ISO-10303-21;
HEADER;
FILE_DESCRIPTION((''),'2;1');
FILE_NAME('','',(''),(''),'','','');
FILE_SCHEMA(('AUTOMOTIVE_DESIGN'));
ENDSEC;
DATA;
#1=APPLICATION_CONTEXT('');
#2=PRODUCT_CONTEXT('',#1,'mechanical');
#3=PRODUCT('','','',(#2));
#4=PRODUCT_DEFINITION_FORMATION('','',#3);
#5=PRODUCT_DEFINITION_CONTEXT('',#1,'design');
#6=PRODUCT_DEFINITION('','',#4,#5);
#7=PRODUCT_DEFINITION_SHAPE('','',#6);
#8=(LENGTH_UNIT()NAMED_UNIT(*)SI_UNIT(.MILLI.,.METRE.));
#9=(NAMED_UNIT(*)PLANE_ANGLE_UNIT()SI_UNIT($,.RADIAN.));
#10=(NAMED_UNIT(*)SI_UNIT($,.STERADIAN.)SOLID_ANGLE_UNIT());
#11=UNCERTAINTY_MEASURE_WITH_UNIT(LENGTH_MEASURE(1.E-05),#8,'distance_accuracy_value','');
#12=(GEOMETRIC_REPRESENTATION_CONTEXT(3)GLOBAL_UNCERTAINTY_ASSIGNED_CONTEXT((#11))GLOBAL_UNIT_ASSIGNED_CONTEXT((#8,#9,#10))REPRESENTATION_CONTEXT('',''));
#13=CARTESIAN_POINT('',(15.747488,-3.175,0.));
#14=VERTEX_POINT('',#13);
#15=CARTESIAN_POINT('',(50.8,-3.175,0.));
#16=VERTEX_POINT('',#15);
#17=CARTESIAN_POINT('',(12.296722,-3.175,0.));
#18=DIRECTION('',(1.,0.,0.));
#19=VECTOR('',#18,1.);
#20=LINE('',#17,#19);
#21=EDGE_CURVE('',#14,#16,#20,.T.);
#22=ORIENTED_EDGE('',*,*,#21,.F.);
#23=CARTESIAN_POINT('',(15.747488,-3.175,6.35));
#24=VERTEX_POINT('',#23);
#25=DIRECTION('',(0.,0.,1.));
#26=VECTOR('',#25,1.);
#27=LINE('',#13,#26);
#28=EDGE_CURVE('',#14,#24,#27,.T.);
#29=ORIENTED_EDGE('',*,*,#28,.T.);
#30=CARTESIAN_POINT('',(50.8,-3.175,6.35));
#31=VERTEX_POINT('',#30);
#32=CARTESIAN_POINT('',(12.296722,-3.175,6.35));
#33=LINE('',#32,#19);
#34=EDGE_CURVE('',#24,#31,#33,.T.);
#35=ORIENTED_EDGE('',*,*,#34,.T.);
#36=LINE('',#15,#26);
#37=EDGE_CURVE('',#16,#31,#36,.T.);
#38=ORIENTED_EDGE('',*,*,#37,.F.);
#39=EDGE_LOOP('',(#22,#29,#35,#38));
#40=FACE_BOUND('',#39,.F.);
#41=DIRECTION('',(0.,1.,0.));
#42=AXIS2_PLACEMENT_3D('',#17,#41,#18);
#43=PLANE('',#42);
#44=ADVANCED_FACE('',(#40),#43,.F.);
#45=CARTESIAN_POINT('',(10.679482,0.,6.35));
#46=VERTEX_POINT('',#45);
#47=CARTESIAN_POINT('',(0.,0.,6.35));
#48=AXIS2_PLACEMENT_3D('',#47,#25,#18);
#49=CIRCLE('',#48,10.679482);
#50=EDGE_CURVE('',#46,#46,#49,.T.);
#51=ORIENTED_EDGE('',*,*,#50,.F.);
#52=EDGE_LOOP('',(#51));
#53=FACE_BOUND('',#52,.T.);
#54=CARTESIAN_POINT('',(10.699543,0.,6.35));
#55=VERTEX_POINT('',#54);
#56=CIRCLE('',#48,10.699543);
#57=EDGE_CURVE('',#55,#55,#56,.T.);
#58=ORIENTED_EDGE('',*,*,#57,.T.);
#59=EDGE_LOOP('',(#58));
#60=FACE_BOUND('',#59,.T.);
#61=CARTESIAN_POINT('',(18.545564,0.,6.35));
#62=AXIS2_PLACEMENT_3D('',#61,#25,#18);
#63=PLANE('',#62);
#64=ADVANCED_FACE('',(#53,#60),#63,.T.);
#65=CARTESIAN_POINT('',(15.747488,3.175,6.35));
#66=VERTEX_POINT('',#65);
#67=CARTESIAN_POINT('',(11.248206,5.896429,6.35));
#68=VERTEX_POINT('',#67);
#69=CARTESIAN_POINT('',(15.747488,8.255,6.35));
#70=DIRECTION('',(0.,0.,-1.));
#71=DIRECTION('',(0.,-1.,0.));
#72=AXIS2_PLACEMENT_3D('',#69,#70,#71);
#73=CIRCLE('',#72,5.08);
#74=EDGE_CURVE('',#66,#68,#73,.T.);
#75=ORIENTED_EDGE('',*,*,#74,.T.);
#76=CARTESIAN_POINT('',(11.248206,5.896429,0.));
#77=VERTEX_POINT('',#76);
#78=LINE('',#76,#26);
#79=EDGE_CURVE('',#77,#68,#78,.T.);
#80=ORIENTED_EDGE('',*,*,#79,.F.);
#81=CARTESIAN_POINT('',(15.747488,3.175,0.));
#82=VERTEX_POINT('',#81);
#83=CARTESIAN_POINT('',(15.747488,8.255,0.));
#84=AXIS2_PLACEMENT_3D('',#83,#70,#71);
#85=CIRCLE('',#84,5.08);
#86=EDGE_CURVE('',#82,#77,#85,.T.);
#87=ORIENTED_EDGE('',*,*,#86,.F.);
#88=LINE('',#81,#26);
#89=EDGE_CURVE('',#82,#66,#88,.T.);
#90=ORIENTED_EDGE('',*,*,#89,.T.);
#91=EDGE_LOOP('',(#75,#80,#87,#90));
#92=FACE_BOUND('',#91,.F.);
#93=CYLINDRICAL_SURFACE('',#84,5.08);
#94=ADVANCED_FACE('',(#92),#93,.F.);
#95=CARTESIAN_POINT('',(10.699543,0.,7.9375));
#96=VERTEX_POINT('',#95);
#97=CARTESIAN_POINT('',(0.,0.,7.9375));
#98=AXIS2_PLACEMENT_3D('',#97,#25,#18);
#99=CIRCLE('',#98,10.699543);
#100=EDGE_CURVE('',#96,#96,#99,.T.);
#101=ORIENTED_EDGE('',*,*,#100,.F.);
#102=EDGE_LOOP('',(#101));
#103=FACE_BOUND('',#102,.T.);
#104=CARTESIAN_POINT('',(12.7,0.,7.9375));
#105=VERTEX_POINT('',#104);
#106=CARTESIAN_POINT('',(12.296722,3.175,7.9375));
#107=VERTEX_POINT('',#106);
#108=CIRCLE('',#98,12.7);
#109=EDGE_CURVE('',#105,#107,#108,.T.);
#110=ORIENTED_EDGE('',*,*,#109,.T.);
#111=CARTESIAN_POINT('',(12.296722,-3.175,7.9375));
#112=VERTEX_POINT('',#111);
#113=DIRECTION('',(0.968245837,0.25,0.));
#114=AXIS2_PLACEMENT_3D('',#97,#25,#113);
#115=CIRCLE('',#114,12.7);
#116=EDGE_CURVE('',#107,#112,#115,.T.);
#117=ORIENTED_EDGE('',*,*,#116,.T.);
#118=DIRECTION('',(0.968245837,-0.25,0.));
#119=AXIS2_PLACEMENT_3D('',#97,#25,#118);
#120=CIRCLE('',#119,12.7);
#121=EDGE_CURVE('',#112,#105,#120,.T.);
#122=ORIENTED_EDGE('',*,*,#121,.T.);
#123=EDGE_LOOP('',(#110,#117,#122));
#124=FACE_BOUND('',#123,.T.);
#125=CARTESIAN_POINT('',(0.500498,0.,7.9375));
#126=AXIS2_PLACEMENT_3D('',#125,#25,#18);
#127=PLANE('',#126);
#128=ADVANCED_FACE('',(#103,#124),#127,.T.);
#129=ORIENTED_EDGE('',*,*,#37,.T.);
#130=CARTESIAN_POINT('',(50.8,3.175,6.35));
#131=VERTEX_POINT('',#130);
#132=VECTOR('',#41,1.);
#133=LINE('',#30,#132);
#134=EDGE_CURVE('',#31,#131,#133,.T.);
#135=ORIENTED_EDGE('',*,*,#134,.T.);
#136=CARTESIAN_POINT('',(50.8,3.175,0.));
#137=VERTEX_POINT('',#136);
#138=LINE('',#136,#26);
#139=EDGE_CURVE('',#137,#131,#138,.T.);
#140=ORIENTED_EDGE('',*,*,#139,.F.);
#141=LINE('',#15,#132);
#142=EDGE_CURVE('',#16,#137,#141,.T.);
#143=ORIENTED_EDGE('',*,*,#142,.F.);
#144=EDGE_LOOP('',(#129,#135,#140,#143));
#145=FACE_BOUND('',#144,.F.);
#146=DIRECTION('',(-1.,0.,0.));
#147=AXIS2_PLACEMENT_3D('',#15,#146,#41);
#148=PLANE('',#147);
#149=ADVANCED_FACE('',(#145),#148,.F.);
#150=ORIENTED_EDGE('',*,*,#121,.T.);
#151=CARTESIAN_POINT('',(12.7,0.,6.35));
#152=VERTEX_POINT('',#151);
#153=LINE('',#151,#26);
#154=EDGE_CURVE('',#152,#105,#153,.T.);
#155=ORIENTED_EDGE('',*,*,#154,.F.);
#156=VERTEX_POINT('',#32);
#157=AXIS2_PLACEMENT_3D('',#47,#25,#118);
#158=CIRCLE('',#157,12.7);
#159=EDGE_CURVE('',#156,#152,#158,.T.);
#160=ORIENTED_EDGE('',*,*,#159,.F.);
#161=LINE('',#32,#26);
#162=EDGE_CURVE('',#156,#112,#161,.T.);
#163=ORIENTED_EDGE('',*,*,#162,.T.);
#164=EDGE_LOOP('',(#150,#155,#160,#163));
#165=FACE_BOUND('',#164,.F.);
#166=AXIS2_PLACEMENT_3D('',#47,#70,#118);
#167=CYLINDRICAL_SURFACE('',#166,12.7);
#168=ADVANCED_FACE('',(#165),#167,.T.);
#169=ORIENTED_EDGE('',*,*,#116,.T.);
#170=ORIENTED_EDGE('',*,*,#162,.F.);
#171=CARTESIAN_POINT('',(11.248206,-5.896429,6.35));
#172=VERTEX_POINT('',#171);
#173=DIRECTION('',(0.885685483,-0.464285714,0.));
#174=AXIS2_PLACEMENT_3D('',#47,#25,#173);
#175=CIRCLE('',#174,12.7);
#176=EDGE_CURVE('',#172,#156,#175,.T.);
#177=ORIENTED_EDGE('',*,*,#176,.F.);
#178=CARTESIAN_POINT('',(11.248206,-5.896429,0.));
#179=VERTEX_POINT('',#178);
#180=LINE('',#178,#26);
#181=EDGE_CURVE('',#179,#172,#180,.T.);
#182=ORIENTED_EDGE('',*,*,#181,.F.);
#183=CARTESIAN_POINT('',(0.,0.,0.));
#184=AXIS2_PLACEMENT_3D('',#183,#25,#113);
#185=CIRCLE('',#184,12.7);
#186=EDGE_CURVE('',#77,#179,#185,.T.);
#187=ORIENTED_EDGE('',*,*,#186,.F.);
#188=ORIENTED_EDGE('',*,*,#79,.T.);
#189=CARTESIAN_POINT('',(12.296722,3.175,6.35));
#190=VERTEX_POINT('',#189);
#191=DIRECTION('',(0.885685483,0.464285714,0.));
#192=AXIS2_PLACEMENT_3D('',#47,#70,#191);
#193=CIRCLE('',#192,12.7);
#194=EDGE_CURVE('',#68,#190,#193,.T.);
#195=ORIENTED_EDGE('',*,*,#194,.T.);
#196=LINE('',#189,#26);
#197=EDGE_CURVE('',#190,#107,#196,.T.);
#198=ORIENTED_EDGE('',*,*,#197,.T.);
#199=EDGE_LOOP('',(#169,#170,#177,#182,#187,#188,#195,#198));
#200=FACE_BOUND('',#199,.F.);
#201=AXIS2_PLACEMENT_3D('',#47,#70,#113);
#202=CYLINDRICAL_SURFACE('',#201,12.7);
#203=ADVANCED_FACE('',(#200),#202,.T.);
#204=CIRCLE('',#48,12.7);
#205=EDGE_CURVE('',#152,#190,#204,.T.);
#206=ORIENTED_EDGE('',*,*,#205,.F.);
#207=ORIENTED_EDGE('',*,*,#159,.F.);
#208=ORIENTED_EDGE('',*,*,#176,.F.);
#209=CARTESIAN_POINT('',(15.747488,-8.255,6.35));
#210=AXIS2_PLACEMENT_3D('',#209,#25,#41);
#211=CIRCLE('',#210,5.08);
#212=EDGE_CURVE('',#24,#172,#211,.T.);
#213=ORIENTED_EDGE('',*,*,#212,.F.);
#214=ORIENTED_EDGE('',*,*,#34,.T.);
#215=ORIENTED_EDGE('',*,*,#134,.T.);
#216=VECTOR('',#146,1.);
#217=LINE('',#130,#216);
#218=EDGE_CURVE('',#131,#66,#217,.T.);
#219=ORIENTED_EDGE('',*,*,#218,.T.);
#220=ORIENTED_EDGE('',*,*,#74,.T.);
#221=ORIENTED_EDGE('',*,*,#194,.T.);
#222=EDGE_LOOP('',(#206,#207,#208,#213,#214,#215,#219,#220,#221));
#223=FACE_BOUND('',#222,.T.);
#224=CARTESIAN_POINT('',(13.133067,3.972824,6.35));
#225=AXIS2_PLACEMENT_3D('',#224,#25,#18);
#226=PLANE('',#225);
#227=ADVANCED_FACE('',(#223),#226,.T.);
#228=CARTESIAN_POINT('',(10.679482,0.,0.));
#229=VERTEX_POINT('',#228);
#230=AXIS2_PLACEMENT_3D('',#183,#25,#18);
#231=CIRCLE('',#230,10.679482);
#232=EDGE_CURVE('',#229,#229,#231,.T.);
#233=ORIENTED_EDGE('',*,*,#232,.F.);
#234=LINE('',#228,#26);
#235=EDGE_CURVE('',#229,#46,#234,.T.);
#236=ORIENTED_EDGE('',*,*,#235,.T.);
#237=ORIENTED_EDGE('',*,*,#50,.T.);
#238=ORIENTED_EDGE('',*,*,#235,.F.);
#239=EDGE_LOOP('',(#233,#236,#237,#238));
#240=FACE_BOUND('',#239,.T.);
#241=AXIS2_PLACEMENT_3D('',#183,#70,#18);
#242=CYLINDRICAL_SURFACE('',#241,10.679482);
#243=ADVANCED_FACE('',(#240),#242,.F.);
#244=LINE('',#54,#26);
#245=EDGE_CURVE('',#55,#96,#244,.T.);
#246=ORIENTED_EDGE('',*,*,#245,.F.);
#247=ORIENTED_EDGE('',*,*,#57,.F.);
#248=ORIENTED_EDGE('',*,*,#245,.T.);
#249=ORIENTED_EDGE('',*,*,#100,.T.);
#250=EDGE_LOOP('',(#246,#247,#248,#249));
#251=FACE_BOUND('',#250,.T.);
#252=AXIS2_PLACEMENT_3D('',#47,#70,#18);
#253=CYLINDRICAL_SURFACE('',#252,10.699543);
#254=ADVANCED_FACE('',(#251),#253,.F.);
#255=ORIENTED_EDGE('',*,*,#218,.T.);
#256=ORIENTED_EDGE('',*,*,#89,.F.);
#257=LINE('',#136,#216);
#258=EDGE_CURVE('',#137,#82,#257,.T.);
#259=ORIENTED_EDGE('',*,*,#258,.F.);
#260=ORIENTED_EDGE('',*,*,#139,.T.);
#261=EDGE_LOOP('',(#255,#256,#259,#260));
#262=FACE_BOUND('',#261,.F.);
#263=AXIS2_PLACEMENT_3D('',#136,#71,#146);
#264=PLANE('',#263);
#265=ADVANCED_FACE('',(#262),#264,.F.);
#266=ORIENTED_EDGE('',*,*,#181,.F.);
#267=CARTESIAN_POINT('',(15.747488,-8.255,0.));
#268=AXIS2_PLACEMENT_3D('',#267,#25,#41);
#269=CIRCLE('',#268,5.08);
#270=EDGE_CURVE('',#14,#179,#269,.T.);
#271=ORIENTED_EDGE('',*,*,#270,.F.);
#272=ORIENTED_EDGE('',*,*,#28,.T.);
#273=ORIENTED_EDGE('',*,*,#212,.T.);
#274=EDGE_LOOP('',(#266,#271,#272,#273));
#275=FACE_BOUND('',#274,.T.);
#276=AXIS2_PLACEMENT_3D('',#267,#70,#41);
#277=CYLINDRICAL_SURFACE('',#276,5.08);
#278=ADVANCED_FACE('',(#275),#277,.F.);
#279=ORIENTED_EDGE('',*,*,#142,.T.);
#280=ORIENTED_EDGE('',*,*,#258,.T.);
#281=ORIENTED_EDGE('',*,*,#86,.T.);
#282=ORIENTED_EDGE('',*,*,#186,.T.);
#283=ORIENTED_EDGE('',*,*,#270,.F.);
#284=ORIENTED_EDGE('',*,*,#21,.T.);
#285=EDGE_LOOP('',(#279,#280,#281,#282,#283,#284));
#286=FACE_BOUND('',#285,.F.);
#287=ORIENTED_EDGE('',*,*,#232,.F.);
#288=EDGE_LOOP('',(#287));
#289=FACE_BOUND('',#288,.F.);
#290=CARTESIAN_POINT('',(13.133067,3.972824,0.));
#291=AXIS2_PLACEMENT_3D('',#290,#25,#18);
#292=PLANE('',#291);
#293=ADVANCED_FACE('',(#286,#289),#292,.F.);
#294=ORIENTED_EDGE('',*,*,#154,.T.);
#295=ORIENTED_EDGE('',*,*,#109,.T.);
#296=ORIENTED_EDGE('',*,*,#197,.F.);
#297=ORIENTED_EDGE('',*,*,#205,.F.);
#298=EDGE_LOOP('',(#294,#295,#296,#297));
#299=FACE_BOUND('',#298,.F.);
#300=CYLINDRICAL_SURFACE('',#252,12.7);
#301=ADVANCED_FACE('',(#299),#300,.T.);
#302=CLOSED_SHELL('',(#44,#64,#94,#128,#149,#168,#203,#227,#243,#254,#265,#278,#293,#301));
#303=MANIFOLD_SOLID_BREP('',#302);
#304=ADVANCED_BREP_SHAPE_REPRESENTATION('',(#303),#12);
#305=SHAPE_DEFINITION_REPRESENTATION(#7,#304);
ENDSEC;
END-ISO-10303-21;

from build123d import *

# Parameters (mm, degrees)
F0_R        = 10.6794819522
F1_DEPTH    = 6.35
F2_R        = 10.6995432546
F3_DEPTH    = 1.5875
F4_T1_DEPTH = 6.35
F5_T1_DEPTH = 6.35


# Not quite as in the source:
# - a fillet or chamfer that OpenCascade refuses, or shapes differently, is made with other operations: its cross-section is extruded or revolved along the edge and cut away or added


with BuildPart() as f1:
    # F0 (on Top) → F1 (new body)
    with BuildSketch(Plane.XY):
        with BuildLine():
            Line((50.8, 3.175), (12.2967221242, 3.175))
            ThreePointArc((12.2967221242, 3.175), (-12.7, 0), (12.2967221242, -3.175))
            Line((12.2967221242, -3.175), (50.8, -3.175))
            Line((50.8, -3.175), (50.8, 3.175))
        make_face()
        Circle(F0_R, mode=Mode.SUBTRACT)
    extrude(amount=F1_DEPTH)

    # F2 (on face) → F3 (join)
    with BuildSketch(Plane.XY.offset(6.35)):
        with BuildLine():
            ThreePointArc((12.2967221242, -3.175), (12.5987771426, -1.6002545145), (12.7, 0))
            ThreePointArc((12.7, 0), (12.5987771426, 1.6002545145), (12.2967221242, 3.175))
            ThreePointArc((12.2967221242, 3.175), (-12.7, 0), (12.2967221242, -3.175))
        make_face()
        Circle(F2_R, mode=Mode.SUBTRACT)
    extrude(amount=F3_DEPTH)

    # F4: fillet of radius 5.08 on 1 edges, made by hand

    # F4_s2 → F4_t1 (join)
    with BuildSketch(Plane.XY):
        with BuildLine():
            ThreePointArc((15.7474878949, -3.175), (13.1183381138, -3.908280383), (11.2482056392, -5.8964285714))
            ThreePointArc((11.2482056392, -5.8964285714), (11.8508417091, -4.5659118242), (12.2967221242, -3.175))
            Line((12.2967221242, -3.175), (15.7474878949, -3.175))
        make_face()
    extrude(amount=F4_T1_DEPTH)

    # F5: fillet of radius 5.08 on 1 edges, made by hand

    # F5_s2 → F5_t1 (join)
    with BuildSketch(Plane.XY):
        with BuildLine():
            ThreePointArc((15.7474878949, 3.175), (13.1183381138, 3.908280383), (11.2482056392, 5.8964285714))
            ThreePointArc((11.2482056392, 5.8964285714), (11.8508417091, 4.5659118242), (12.2967221242, 3.175))
            Line((12.2967221242, 3.175), (15.7474878949, 3.175))
        make_face()
    extrude(amount=F5_T1_DEPTH)


solid = f1.part
